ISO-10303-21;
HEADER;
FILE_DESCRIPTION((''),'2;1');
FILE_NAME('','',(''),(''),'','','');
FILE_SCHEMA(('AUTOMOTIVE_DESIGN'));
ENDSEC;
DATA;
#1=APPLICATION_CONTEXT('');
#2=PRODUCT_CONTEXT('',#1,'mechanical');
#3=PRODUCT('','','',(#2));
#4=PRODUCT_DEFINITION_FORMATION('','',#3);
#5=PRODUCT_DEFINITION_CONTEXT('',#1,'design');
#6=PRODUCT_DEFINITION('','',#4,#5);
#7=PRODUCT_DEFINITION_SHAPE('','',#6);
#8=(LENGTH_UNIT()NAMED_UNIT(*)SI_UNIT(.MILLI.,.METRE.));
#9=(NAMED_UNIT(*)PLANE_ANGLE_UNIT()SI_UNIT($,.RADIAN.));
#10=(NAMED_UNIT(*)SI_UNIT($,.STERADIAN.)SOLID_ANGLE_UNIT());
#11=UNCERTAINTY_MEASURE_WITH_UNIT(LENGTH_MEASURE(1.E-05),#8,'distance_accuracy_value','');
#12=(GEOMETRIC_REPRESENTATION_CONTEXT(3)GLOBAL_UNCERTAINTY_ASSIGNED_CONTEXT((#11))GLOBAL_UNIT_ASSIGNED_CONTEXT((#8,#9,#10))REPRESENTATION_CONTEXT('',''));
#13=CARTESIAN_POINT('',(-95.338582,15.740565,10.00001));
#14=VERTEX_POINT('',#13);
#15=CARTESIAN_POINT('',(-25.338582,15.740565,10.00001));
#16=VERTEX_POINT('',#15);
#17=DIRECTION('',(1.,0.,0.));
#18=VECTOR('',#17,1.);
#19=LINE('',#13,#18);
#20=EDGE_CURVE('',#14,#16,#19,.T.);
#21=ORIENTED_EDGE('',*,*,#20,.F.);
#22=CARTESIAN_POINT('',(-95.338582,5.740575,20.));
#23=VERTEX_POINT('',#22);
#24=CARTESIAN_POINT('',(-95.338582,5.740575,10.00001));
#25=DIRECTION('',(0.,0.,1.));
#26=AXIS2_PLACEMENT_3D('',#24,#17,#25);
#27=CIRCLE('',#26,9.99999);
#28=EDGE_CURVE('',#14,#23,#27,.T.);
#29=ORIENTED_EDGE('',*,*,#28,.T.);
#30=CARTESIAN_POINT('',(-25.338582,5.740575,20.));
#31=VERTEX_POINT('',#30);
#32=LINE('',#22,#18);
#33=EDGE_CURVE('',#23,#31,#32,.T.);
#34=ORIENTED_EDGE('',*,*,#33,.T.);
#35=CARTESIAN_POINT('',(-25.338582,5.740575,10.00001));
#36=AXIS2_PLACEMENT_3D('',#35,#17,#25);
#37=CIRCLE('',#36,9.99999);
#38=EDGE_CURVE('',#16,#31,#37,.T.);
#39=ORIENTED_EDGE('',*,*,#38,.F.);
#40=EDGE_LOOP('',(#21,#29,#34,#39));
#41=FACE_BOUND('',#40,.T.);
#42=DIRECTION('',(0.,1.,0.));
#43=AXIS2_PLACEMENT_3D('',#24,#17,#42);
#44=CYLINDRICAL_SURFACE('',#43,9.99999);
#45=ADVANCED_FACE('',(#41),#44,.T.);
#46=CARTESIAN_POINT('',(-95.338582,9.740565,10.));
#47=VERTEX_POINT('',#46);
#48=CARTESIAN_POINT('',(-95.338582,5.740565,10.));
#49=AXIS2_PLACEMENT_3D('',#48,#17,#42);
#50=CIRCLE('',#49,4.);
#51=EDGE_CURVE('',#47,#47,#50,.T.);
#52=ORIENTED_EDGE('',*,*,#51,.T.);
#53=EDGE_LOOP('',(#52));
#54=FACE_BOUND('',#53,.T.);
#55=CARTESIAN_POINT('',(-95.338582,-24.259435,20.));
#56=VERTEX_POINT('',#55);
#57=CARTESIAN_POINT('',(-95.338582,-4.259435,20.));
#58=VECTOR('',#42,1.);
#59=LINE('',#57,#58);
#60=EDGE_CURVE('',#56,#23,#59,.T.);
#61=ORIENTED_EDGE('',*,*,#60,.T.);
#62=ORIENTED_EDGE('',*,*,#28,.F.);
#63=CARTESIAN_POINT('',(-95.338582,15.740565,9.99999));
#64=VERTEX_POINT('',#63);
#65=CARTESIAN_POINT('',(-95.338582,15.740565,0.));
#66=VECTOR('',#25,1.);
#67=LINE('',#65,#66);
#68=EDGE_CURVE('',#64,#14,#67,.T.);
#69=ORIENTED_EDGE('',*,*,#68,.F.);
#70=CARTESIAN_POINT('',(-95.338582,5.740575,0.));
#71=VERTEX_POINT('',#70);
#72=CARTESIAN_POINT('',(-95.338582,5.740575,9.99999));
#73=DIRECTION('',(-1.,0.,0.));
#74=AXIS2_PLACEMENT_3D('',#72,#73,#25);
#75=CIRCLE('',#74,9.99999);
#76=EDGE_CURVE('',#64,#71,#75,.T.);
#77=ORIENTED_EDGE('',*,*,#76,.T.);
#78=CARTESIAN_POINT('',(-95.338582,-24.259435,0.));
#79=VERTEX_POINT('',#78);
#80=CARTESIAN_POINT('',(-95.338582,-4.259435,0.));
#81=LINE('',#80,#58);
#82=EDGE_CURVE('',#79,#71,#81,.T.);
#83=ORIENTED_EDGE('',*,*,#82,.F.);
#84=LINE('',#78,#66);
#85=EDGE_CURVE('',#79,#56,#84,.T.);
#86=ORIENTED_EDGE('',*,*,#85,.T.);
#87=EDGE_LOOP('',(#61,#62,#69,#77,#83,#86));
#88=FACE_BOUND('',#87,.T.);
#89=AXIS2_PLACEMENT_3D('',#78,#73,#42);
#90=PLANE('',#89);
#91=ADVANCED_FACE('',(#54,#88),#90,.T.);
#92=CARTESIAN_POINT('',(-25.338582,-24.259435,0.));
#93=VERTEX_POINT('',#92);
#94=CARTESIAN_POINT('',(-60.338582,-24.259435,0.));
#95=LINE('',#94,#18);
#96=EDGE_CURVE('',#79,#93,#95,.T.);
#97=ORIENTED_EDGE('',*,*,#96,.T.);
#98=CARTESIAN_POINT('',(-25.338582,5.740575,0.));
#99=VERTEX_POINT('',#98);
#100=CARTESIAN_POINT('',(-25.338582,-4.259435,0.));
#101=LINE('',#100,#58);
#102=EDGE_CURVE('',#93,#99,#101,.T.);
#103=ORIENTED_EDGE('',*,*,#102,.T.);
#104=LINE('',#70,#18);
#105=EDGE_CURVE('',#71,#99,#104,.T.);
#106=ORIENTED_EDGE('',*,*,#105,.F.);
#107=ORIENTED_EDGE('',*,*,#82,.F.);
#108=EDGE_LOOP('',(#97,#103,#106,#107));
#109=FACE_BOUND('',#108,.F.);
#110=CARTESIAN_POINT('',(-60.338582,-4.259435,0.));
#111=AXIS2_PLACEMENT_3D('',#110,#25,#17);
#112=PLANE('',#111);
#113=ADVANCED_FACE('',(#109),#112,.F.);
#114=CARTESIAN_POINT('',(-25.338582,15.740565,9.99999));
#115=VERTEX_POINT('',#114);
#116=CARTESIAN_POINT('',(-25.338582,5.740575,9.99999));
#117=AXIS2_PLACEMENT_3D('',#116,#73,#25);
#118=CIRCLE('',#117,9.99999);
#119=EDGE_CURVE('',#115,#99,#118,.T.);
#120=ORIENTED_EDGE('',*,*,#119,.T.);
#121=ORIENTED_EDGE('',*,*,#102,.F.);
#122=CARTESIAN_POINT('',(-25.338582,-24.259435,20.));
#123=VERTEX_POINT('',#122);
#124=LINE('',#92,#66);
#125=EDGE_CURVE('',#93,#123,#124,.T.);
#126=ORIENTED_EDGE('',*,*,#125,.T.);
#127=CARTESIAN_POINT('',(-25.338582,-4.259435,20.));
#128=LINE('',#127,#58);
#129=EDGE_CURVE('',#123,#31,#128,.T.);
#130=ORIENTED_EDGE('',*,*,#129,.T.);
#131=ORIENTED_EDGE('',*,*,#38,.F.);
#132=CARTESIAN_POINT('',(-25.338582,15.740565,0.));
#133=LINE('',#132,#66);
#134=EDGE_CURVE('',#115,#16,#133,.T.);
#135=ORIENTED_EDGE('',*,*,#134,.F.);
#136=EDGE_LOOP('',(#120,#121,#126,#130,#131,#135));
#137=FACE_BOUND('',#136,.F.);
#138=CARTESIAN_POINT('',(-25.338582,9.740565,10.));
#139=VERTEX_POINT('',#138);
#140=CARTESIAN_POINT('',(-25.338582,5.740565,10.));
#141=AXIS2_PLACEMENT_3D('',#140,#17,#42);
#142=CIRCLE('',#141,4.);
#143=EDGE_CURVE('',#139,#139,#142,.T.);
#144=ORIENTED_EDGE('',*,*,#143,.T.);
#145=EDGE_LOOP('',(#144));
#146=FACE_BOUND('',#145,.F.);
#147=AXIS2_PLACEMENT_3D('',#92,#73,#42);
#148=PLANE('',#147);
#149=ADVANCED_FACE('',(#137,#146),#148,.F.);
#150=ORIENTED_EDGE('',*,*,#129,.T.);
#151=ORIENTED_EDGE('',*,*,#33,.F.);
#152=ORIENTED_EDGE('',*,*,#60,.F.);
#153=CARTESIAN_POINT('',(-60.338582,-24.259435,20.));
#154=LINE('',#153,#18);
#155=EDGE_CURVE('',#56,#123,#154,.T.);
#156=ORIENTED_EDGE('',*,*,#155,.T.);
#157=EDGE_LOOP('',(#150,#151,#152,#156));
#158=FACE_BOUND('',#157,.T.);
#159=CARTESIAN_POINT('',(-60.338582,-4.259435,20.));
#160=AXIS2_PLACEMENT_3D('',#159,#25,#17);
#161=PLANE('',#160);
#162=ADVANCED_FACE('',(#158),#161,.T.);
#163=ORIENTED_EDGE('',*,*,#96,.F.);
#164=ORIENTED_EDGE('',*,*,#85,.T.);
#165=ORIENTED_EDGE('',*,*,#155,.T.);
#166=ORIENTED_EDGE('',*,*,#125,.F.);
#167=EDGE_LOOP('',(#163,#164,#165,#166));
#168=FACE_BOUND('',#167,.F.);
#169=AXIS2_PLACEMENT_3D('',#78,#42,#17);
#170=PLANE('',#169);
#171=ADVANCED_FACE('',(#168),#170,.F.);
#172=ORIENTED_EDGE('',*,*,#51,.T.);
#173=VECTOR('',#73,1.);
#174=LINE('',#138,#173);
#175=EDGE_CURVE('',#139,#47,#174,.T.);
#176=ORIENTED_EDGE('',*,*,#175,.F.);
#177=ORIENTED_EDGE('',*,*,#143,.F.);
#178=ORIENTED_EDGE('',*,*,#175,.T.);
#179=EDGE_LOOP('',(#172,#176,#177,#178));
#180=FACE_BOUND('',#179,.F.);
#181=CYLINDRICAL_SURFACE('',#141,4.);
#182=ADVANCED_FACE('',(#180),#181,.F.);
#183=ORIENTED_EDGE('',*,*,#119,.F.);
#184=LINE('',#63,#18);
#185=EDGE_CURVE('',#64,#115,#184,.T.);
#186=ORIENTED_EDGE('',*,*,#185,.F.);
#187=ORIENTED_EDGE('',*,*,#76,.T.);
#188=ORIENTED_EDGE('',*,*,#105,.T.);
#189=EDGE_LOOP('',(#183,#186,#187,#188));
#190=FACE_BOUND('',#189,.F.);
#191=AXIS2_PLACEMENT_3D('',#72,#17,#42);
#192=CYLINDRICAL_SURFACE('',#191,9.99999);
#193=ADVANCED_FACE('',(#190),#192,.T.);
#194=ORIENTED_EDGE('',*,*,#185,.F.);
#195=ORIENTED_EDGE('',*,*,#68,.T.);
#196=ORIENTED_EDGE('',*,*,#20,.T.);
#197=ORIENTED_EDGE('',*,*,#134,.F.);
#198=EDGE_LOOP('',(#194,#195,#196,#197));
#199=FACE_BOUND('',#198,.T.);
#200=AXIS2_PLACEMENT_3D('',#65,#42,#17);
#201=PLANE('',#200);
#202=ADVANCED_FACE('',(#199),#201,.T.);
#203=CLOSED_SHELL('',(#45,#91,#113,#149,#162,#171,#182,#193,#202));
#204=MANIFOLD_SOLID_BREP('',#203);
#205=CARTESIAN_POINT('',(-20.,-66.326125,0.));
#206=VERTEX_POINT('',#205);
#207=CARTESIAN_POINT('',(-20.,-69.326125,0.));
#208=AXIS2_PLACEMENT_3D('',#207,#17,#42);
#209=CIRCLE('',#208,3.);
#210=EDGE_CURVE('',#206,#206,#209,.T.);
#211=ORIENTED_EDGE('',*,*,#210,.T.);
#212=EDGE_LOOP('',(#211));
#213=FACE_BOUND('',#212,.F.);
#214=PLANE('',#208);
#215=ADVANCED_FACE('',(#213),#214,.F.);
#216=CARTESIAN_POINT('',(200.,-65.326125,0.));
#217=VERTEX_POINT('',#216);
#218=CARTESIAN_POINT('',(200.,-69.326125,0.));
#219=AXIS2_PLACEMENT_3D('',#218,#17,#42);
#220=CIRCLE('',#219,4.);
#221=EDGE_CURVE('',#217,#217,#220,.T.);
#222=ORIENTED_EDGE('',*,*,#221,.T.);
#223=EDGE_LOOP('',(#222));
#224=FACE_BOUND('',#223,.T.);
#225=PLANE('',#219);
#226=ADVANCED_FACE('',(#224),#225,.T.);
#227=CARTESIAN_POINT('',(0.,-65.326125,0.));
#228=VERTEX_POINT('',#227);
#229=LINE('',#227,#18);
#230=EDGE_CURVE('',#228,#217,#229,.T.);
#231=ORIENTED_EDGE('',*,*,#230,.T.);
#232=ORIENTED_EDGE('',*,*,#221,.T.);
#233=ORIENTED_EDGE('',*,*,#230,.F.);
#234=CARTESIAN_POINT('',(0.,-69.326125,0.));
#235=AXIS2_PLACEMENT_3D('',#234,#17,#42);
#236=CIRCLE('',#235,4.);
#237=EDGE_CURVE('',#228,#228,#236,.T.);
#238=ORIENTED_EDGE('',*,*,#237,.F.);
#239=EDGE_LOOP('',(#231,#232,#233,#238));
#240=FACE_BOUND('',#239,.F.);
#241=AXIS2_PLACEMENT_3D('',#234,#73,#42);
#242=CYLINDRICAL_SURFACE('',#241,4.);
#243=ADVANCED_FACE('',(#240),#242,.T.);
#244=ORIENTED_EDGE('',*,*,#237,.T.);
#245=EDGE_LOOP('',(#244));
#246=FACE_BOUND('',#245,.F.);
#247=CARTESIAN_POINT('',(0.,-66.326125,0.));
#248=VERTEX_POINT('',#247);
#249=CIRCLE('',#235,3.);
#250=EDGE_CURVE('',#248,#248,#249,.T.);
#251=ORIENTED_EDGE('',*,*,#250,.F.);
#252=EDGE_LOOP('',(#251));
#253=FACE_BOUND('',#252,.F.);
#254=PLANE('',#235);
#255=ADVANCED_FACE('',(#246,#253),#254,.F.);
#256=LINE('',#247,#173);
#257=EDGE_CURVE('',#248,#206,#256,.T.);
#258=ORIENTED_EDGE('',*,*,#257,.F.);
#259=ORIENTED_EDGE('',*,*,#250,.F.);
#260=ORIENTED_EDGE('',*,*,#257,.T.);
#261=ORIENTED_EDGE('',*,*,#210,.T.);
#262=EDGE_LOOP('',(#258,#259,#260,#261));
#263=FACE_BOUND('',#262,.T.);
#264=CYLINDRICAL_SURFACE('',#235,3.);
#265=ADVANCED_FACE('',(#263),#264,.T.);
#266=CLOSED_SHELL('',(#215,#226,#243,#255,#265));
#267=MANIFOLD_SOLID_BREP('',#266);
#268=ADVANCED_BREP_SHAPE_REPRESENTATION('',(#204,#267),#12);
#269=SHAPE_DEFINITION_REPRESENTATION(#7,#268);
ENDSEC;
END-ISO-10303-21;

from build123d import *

# Parameters (mm, degrees)
F0_R      = 3
F1_DEPTH  = 20
F0_R_2    = 4
F1_FACE_R = 3
F2_DEPTH  = 200
F3_W      = 70
F3_H      = 40
F4_DEPTH  = 20
F5_R      = 9.99999
F6_R      = 4
F7_DEPTH  = 70.001


# Not quite as in the source:
# - a fillet or chamfer is up to 0.001 mm smaller than in the source, because OpenCascade refuses the exact size


with BuildPart() as f1:
    # F0 (on Right) → F1 (new body)
    with BuildSketch(Plane.YZ):
        with Locations((-69.3261250854, 0)):
            Circle(F0_R)
    extrude(amount=-F1_DEPTH)

    # F0 (on Right) + F1_face (on face) → F2 (join)
    with BuildSketch(Plane.YZ):
        with Locations((-69.3261250854, 0)):
            Circle(F0_R_2)
        with Locations((-69.3261250854, 0)):
            Circle(F0_R, mode=Mode.SUBTRACT)
    with BuildSketch(Plane(origin=(0, -69.3261250854, 0), x_dir=(0, 1, 0), z_dir=(1, 0, 0))):
        Circle(F1_FACE_R)
    extrude(amount=F2_DEPTH)


with BuildPart() as f4:
    # F3 (on Top) → F4 (new body)
    with BuildSketch(Plane.XY):
        with Locations((-60.3385819857, -4.25943546)):
            Rectangle(F3_W, F3_H)
    extrude(amount=F4_DEPTH)

    # F5 (radius 10 in the source; OpenCascade refuses exactly that, so slightly less here)
    f5_edges = [f4.edges().sort_by_distance(p)[0] for p in [
        (-60.338582, 15.740565, 20),
        (-60.338582, 15.740565, 0),
    ]]
    fillet(f5_edges, radius=F5_R)

    # F6 (on face) → F7 (cut, through all)
    with BuildSketch(Plane.YZ.offset(-25.3385819857)):
        with Locations((5.74056454, 10)):
            Circle(F6_R)
    extrude(amount=-F7_DEPTH, mode=Mode.SUBTRACT)


solid = Compound([f1.part, f4.part])
